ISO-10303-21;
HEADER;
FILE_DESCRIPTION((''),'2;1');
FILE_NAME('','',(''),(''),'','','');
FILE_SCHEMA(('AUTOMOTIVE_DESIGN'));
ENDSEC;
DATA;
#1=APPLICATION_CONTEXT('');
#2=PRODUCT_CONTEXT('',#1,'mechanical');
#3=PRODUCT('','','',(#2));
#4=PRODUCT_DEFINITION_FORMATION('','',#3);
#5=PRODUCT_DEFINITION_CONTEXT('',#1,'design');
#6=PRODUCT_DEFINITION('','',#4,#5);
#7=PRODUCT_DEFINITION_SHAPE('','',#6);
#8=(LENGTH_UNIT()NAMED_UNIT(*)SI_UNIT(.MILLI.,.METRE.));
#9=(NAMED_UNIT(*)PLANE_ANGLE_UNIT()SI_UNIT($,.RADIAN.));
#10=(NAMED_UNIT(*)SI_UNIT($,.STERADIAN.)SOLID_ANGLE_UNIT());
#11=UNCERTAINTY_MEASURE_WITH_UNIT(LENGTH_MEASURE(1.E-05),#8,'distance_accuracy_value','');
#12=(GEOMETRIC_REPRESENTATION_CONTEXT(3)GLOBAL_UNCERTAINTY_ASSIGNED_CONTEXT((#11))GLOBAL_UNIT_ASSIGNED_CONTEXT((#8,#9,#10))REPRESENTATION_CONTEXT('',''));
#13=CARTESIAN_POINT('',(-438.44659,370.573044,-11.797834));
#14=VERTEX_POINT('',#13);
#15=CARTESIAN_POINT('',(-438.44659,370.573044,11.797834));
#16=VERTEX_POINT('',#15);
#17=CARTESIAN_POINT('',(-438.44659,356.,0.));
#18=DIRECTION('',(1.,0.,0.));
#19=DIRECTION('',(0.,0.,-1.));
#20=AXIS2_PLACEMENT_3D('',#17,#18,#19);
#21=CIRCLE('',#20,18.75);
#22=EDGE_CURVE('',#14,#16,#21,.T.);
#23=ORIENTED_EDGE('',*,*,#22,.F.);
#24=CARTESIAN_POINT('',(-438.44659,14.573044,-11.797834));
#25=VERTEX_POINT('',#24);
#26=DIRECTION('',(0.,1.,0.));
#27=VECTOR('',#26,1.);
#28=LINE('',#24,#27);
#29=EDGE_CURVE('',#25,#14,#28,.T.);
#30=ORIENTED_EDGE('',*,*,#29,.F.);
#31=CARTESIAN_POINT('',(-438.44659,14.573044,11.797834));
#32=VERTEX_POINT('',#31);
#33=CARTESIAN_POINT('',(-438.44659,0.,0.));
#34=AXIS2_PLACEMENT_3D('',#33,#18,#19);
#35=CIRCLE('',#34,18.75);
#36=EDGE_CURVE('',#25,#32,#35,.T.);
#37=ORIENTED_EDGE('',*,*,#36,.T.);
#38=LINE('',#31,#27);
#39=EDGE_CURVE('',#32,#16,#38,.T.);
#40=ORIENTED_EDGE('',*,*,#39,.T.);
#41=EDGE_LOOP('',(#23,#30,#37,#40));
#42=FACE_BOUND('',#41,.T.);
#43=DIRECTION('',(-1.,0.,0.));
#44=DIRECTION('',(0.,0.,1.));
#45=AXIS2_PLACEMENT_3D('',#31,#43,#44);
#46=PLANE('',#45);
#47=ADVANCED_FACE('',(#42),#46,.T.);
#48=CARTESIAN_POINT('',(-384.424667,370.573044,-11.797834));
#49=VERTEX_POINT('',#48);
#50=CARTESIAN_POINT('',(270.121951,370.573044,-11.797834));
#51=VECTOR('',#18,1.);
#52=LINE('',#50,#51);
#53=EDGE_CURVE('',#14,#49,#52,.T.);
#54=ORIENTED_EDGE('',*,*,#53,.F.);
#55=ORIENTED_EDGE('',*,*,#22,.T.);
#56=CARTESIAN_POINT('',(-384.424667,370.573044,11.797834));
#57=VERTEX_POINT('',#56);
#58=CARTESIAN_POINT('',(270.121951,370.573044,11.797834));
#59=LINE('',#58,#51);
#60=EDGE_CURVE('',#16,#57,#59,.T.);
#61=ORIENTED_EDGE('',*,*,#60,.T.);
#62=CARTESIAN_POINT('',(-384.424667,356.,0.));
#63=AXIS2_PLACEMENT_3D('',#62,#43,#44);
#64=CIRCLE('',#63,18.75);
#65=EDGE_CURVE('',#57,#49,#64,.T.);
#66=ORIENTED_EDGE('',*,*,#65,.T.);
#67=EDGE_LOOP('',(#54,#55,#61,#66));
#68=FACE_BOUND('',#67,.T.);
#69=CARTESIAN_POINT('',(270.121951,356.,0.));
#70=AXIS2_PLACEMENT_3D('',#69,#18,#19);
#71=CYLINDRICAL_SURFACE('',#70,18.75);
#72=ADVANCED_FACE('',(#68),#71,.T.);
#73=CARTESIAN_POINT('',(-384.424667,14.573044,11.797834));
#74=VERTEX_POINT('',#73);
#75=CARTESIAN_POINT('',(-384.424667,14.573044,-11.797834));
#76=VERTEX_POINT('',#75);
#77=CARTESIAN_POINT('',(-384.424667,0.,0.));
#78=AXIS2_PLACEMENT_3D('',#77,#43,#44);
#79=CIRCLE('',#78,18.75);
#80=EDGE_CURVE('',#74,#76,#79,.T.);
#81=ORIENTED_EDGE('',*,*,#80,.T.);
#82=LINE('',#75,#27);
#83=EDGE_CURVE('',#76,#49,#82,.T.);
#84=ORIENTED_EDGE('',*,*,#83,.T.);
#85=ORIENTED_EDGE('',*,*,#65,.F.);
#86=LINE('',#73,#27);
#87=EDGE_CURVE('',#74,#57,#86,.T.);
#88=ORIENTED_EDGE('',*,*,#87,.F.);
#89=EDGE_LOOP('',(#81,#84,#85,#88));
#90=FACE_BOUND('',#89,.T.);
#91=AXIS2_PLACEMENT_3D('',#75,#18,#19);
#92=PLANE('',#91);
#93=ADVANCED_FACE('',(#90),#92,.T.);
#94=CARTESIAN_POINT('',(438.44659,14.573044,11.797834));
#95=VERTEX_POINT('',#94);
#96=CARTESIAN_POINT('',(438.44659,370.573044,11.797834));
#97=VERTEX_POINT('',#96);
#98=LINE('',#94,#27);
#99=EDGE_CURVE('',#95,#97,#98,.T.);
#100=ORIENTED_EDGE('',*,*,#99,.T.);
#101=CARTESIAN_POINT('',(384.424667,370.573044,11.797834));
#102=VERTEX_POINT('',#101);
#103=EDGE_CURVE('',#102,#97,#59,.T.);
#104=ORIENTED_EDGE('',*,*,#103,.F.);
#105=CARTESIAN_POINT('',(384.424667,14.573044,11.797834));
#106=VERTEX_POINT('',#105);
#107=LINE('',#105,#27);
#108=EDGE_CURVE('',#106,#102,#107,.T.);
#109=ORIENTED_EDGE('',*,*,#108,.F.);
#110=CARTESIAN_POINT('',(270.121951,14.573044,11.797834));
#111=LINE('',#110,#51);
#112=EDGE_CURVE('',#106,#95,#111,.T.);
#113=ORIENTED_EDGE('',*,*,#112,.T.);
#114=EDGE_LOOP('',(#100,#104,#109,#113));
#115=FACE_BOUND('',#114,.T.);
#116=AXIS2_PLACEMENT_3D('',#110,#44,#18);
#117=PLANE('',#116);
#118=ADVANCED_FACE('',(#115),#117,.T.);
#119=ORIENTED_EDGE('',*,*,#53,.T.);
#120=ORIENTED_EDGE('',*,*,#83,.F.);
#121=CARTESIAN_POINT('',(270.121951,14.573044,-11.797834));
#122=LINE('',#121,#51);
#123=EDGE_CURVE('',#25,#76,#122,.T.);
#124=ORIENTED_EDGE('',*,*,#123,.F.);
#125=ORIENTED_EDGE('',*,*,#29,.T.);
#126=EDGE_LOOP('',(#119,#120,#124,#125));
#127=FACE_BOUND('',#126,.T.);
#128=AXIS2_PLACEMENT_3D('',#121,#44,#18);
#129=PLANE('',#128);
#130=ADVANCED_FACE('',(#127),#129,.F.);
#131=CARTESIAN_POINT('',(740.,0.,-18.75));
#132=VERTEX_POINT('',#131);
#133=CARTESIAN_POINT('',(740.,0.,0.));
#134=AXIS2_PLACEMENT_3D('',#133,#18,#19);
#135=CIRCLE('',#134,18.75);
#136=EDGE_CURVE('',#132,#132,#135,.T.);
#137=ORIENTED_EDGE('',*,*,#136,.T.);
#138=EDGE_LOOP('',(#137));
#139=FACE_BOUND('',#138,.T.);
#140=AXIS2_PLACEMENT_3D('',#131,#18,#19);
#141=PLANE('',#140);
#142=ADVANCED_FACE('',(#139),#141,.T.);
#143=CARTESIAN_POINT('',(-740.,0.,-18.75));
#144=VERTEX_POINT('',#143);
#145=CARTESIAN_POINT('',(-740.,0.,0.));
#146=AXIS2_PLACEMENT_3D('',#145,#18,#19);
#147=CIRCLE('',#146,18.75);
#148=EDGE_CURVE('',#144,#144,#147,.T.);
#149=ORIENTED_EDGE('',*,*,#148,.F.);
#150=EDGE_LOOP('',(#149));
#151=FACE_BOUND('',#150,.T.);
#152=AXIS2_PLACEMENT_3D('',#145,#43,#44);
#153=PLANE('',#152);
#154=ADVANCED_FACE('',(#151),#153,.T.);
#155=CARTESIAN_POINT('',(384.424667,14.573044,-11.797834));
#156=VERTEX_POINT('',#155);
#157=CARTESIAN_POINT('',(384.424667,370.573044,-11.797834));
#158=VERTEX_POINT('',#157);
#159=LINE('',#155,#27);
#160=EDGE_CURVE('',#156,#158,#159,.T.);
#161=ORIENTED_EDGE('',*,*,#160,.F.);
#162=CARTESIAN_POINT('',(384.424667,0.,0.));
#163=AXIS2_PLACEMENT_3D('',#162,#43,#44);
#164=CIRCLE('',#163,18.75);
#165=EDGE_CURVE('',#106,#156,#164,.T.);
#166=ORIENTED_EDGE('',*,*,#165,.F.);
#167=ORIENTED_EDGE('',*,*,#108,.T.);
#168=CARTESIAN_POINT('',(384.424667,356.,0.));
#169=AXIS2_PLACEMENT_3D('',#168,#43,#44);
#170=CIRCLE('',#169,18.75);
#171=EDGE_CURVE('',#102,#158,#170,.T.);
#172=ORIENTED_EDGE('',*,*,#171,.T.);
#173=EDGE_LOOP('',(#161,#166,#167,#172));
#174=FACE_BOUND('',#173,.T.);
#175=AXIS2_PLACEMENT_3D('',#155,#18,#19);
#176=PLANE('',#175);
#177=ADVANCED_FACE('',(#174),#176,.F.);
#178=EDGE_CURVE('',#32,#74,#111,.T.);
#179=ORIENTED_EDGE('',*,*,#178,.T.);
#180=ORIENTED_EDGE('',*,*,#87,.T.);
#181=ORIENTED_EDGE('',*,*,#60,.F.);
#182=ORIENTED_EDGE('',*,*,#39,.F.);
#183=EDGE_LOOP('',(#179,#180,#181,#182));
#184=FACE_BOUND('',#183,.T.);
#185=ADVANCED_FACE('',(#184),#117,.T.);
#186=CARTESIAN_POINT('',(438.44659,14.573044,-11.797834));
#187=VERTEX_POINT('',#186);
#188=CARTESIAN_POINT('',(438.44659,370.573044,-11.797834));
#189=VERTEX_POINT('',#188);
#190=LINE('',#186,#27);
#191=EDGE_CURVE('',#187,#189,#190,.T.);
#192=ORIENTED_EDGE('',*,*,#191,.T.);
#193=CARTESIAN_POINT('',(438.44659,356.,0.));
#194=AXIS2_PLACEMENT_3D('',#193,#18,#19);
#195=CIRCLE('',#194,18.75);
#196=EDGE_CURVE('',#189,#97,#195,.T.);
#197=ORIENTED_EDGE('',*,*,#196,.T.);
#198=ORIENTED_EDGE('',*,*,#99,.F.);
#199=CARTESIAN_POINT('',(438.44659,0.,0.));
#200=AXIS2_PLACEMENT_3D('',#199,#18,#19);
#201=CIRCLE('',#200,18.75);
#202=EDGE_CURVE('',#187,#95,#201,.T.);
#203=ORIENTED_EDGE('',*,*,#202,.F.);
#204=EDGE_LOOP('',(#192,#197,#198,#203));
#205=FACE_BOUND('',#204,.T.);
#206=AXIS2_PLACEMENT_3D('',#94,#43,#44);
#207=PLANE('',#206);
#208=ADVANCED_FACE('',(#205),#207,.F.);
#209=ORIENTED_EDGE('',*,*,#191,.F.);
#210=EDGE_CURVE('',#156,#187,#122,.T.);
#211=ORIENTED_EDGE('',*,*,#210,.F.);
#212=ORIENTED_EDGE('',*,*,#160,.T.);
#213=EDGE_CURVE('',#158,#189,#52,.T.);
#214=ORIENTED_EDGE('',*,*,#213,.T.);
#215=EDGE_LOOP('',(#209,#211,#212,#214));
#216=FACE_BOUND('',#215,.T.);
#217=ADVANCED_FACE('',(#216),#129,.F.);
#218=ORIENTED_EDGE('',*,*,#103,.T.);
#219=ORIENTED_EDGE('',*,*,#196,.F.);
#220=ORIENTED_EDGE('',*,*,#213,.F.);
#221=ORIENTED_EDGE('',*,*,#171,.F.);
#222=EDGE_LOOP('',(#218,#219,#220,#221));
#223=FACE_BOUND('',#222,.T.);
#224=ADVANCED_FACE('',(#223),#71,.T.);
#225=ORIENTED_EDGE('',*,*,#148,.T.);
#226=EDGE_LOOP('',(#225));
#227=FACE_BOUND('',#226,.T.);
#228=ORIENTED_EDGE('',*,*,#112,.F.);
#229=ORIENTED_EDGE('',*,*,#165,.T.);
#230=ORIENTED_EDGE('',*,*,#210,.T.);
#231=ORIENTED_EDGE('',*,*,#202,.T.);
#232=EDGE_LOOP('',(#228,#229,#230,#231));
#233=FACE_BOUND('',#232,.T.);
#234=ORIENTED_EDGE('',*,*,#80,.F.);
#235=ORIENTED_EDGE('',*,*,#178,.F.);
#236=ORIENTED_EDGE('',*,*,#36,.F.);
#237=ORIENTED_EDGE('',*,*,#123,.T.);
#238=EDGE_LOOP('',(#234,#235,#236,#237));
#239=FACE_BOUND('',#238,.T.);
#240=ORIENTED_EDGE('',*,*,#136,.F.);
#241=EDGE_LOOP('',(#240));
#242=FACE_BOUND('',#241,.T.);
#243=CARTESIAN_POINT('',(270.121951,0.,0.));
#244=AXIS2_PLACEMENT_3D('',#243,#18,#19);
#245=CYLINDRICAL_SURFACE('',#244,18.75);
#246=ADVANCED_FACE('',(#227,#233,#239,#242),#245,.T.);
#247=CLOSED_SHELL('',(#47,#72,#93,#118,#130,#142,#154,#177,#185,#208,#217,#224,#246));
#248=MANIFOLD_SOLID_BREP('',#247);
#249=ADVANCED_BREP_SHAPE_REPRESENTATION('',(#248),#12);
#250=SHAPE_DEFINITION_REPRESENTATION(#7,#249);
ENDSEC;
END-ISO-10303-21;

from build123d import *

# Parameters (mm, degrees)
SKETCH1_W           = 1480
SKETCH1_H           = 18.75
BOSS_EXTRUDE2_START = -438.446590399
BOSS_EXTRUDE2_DEPTH = 54.021923435


# Read off the part's stored shape, not the designer's step: Boss-Extrude2
with BuildPart() as part:
    # Sketch1 → Revolve1 (revolve)
    with BuildSketch(Plane(origin=(0, 0, 0), x_dir=(1, 0, 0), z_dir=(0, 1, 0))):
        with Locations((0, 9.375)):
            Rectangle(SKETCH1_W, SKETCH1_H)
    revolve(axis=Axis((270.12195122, 0, 0), (-1, 0, 0)))

    # Boss-Extrude2 outline → Boss-Extrude2 (add)
    with BuildSketch(Plane.YZ.offset(BOSS_EXTRUDE2_START)):
        with BuildLine():
            Line((14.573043819, -11.797834286), (370.573043819, -11.797834286))
            ThreePointArc((370.573043819, -11.797834286), (374.75, 0), (370.573043819, 11.797834286))
            Line((370.573043819, 11.797834286), (14.573043819, 11.797834286))
            ThreePointArc((14.573043819, 11.797834286), (18.75, 0), (14.573043819, -11.797834286))
        make_face()
    boss_extrude2 = extrude(amount=BOSS_EXTRUDE2_DEPTH)

    # Mirror1: Boss-Extrude2 across plane
    add(boss_extrude2.mirror(Plane(origin=(0, 0, 0), x_dir=(0, 0, 1), z_dir=(1, 0, 0))))


solid = part.part
